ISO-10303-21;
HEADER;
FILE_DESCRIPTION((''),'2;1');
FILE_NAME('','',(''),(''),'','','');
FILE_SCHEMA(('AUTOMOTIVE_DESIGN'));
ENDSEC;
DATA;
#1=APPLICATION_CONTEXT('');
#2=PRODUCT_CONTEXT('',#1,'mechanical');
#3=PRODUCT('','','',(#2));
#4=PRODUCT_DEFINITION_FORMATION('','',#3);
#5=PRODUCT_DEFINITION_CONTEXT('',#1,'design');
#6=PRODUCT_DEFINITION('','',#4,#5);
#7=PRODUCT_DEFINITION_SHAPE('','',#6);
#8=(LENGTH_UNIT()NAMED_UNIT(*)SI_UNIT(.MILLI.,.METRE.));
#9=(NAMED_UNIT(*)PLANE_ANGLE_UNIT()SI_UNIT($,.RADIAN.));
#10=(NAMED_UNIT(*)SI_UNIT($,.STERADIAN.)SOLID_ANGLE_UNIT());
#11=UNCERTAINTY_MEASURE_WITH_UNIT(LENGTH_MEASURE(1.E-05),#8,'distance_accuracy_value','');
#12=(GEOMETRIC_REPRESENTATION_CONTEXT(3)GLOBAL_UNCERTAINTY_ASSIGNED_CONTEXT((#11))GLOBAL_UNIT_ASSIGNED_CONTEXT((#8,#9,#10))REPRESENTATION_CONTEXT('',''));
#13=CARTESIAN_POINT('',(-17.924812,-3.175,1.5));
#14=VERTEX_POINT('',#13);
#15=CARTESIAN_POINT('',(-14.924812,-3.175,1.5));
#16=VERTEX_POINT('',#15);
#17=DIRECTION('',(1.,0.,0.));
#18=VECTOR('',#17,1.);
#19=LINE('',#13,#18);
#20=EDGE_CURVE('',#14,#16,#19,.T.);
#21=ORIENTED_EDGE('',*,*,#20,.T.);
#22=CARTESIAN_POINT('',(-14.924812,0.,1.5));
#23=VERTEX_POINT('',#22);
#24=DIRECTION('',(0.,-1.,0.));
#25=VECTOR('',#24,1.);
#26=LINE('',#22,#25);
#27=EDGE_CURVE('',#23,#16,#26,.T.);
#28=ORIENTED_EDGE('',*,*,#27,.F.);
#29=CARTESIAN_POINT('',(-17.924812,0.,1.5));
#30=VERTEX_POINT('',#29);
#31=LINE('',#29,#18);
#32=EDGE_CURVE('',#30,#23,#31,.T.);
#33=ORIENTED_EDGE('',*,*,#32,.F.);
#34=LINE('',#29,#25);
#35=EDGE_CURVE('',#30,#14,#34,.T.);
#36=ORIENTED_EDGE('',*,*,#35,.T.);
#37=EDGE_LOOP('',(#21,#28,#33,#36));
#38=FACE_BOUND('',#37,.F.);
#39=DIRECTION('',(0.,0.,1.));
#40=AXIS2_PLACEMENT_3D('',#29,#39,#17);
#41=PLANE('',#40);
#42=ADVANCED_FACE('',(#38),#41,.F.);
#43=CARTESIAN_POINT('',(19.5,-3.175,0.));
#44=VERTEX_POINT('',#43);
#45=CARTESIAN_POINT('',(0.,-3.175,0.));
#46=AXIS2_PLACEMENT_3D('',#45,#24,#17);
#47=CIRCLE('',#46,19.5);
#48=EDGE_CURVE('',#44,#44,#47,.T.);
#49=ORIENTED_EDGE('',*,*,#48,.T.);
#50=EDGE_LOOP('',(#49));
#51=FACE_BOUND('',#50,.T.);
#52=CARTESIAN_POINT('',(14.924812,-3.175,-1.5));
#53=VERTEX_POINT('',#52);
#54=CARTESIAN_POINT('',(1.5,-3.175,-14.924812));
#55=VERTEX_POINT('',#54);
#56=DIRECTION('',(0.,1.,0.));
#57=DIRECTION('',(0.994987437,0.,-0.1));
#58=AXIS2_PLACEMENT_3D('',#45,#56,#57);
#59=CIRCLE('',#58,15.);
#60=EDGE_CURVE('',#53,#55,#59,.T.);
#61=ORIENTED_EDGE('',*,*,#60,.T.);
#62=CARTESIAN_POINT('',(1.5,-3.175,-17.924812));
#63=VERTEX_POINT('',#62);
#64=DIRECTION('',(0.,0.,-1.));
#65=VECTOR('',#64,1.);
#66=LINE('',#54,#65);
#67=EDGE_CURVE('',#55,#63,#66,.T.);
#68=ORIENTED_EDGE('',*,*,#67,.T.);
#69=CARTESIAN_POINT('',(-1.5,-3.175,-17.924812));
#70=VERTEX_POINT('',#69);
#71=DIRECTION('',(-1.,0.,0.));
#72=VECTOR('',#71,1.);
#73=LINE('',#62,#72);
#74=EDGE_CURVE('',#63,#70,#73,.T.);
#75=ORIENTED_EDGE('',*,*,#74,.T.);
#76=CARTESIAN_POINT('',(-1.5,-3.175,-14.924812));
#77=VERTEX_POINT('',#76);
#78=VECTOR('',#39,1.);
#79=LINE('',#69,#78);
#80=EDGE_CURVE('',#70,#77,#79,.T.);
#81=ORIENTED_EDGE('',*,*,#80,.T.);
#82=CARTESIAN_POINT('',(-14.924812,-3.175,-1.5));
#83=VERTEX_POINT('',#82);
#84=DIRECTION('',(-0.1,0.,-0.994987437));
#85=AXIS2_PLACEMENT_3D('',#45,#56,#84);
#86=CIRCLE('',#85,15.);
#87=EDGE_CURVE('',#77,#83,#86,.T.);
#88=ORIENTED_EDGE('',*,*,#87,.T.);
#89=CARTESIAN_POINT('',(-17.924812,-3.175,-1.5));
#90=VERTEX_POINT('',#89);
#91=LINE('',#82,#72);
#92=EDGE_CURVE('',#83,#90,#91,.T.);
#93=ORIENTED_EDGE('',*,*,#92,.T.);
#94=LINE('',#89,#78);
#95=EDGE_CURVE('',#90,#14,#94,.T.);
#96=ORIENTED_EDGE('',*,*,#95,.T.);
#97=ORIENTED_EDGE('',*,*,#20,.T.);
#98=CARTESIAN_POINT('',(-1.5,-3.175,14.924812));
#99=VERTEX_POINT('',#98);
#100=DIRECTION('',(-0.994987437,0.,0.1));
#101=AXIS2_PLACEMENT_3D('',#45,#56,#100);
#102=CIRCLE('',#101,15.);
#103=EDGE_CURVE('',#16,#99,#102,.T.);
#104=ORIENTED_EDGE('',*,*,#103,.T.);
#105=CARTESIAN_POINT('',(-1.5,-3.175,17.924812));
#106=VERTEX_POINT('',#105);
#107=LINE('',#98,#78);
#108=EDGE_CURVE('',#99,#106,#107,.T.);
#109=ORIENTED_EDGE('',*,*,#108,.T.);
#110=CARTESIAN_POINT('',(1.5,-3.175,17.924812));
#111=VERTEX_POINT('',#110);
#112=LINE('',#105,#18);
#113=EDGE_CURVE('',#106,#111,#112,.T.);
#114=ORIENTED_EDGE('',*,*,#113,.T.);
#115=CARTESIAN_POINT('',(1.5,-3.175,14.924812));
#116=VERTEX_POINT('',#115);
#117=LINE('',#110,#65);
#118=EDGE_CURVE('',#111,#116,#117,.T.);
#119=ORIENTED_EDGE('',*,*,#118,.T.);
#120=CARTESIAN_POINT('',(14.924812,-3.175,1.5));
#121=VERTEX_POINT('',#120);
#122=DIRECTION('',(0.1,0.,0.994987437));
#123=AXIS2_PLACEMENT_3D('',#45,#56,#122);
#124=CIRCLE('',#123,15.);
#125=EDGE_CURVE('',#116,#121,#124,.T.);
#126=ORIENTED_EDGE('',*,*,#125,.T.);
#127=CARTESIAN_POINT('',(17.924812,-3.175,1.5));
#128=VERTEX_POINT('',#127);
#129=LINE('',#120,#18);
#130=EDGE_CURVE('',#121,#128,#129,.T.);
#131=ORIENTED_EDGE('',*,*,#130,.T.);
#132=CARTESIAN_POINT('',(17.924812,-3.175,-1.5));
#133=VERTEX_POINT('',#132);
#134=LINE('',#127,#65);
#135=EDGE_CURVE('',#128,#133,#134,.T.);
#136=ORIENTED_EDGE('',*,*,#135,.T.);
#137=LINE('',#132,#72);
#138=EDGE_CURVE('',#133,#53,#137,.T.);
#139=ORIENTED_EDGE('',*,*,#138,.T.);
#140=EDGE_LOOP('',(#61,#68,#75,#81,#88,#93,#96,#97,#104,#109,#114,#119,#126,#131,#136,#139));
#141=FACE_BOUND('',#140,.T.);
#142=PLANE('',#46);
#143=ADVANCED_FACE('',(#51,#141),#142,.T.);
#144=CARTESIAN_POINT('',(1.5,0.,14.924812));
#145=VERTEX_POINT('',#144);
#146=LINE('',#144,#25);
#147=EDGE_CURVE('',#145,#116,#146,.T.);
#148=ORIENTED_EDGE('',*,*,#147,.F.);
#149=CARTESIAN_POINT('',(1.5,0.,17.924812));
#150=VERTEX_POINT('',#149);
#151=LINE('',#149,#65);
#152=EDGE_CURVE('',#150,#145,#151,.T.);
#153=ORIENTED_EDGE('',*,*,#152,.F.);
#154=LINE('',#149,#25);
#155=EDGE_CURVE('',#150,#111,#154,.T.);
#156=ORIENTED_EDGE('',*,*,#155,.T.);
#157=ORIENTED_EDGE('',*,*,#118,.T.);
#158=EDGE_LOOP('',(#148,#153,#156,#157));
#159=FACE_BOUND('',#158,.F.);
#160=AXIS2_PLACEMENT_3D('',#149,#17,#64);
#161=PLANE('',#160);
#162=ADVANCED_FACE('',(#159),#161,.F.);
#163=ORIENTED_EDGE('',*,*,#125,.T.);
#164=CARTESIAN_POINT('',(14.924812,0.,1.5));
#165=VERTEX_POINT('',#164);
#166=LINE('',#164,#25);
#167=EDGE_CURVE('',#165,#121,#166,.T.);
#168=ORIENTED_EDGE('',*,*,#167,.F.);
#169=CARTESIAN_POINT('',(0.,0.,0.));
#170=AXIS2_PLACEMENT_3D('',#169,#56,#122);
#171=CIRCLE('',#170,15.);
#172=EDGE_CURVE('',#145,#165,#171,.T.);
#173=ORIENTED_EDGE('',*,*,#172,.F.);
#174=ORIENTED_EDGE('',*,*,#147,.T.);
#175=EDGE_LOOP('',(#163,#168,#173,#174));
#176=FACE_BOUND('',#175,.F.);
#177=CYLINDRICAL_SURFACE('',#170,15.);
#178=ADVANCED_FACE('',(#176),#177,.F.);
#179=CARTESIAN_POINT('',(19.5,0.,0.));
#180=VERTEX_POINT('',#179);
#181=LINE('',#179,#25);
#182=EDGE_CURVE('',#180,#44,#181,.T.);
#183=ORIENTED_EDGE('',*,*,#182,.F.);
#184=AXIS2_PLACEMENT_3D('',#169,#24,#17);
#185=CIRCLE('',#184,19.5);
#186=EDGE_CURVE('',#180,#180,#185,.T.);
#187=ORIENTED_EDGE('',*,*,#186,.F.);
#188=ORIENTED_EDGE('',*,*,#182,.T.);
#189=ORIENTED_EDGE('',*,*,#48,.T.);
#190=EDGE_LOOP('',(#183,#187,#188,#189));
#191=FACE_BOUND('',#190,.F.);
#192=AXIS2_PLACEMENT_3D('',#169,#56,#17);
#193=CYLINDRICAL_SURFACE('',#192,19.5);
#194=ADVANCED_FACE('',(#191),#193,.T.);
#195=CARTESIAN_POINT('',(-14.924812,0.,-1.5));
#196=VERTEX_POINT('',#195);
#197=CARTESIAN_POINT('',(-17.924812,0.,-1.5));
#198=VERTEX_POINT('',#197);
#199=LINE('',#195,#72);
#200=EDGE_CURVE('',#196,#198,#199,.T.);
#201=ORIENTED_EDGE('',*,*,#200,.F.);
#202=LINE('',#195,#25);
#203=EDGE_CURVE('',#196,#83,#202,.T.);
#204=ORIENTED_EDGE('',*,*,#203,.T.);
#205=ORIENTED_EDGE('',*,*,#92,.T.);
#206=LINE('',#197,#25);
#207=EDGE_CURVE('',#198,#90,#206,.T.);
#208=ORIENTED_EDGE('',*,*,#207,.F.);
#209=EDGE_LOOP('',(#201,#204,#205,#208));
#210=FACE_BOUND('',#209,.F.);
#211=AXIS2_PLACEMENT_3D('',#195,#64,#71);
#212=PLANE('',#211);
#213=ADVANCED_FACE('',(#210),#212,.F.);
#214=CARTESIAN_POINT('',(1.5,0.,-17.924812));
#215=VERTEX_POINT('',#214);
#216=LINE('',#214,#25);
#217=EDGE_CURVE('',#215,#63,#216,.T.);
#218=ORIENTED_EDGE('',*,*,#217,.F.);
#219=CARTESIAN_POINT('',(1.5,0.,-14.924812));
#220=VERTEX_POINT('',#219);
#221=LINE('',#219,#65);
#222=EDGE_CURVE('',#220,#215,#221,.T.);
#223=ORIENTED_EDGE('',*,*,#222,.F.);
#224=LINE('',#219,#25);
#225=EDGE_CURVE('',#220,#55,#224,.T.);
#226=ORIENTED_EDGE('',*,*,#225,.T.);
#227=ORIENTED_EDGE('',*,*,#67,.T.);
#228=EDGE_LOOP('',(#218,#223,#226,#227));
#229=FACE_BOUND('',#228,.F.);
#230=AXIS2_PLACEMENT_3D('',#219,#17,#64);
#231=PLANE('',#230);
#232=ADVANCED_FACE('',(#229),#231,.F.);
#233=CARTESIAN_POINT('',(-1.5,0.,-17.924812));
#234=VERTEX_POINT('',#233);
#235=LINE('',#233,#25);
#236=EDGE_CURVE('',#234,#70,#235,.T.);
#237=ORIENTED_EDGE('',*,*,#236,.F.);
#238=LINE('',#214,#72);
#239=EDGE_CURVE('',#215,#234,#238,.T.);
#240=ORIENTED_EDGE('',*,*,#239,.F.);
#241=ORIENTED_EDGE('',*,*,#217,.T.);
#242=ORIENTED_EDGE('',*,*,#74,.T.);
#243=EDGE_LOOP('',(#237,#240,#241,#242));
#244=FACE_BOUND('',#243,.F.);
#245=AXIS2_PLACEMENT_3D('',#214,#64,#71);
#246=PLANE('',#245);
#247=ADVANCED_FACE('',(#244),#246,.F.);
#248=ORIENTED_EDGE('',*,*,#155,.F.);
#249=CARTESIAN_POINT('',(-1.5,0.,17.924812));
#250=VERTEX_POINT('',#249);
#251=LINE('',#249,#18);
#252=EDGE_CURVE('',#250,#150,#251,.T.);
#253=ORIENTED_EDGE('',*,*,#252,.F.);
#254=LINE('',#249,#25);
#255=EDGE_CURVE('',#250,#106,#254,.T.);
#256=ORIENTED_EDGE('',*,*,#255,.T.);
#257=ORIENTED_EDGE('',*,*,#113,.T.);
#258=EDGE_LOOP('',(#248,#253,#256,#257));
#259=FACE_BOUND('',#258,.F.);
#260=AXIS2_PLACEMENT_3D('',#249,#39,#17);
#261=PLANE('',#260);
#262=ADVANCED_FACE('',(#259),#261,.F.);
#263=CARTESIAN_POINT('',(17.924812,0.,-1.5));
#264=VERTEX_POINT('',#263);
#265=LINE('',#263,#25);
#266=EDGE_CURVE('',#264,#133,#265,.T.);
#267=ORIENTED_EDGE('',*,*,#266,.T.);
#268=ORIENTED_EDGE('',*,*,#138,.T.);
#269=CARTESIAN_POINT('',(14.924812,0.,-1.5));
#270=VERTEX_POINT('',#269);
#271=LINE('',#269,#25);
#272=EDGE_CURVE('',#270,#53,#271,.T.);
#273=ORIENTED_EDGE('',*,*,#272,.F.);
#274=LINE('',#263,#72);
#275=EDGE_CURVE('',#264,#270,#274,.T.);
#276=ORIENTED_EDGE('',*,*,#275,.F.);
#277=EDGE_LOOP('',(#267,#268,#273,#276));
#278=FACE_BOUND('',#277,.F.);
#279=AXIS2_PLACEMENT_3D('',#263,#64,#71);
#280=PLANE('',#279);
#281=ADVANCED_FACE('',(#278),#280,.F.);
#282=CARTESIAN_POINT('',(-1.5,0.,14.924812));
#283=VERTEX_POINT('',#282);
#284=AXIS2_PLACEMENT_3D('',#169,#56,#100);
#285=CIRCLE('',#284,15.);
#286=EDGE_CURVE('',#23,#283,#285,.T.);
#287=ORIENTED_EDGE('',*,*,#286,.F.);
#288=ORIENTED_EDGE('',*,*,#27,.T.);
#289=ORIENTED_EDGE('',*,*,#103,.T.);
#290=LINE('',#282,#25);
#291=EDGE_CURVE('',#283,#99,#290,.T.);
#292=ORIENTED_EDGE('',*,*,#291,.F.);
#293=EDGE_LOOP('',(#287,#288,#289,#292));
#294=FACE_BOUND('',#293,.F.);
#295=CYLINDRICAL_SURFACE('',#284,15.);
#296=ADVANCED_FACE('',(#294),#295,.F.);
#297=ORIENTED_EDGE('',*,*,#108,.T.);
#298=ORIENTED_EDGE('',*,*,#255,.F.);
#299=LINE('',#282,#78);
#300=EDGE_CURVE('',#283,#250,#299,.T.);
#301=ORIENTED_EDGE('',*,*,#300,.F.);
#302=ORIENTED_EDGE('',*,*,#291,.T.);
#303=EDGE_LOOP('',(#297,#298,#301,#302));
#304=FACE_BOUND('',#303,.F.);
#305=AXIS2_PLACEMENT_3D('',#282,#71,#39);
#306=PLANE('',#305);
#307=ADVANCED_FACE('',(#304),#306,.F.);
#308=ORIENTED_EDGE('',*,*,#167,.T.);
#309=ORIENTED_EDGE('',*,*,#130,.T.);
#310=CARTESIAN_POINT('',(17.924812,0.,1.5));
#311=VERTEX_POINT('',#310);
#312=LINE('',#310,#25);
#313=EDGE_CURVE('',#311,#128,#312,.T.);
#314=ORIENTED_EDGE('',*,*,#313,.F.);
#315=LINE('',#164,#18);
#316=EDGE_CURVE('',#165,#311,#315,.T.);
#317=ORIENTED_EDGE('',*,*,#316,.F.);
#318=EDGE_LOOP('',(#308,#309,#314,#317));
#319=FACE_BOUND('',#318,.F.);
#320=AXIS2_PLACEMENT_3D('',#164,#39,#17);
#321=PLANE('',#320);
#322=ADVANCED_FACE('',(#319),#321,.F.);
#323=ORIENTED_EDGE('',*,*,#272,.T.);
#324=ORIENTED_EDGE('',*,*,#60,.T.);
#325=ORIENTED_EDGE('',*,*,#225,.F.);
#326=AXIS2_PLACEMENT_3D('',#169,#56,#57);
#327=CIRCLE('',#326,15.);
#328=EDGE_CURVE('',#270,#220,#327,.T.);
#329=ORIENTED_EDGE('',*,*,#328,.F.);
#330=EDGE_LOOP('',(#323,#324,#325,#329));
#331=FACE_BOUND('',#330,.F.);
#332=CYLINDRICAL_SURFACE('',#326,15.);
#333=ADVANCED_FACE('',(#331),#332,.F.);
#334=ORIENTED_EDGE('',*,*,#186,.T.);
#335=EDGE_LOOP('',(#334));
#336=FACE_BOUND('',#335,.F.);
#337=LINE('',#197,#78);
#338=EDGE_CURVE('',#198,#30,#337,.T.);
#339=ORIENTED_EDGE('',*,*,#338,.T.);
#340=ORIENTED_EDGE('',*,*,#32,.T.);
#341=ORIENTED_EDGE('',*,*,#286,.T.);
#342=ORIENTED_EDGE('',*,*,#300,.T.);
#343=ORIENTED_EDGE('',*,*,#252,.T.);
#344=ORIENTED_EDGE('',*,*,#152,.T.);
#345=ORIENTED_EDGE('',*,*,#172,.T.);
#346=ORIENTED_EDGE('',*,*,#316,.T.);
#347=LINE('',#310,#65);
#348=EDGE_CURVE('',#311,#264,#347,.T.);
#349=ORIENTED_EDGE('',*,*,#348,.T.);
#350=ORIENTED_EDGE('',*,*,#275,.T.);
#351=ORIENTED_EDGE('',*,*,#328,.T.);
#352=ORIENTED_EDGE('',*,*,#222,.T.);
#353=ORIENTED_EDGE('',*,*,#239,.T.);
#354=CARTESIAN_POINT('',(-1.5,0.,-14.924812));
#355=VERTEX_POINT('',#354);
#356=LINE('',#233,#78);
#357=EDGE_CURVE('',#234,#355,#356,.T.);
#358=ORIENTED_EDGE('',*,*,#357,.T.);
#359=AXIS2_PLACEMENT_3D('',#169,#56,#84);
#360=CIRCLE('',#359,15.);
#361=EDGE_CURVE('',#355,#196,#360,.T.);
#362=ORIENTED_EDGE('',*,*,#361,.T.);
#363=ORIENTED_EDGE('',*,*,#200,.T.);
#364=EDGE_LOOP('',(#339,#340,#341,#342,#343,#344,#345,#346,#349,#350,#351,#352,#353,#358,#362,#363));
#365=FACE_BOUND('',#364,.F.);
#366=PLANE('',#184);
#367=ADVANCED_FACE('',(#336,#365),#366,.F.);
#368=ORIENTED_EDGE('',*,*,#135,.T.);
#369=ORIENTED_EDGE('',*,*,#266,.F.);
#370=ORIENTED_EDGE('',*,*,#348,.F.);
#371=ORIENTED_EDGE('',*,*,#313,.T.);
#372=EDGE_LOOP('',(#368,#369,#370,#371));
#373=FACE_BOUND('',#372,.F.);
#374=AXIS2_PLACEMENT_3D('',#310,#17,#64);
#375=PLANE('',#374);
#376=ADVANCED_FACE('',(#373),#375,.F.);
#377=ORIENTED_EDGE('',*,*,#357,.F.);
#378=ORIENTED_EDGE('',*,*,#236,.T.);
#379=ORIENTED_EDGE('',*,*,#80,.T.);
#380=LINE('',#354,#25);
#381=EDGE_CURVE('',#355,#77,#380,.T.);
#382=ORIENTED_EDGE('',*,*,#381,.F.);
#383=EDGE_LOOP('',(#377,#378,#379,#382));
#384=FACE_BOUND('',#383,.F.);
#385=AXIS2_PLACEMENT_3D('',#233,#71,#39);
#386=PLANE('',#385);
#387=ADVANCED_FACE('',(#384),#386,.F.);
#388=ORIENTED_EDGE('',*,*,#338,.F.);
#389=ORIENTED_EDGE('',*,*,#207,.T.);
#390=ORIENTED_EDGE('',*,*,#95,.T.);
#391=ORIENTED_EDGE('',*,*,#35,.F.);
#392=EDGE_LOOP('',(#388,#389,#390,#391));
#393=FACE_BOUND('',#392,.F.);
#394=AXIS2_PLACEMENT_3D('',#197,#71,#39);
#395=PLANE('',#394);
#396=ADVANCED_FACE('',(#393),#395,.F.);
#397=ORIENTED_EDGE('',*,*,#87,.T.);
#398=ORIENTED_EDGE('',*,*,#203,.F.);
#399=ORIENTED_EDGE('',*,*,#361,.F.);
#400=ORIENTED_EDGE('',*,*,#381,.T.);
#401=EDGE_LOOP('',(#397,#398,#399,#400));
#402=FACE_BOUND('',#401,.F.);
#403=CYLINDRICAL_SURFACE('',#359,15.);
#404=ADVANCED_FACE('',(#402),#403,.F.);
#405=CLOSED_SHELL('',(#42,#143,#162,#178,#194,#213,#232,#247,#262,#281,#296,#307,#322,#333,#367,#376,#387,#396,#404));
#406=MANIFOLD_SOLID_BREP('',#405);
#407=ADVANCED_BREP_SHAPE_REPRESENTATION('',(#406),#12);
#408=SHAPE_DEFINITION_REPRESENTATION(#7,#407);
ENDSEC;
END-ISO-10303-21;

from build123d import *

# Parameters (mm, degrees)
F0_R     = 19.5
F1_DEPTH = 3.175


# Not quite as in the source:
# - a length typed as a fraction of an inch, garbled in the dataset ("3 / 203.2 mm" for 3/8 in), is restored


with BuildPart() as f1:
    # F0 (on Front) → F1 (new body)
    with BuildSketch(Plane.XZ):
        Circle(F0_R)
        with BuildLine():
            ThreePointArc((1.5, 14.9248115566), (10.6066017178, 10.6066017178), (14.9248115566, 1.5))
            Line((14.9248115566, 1.5), (17.9248115566, 1.5))
            Line((17.9248115566, 1.5), (17.9248115566, -1.5))
            Line((17.9248115566, -1.5), (14.9248115566, -1.5))
            ThreePointArc((14.9248115566, -1.5), (10.6066017178, -10.6066017178), (1.5, -14.9248115566))
            Line((1.5, -14.9248115566), (1.5, -17.9248115566))
            Line((1.5, -17.9248115566), (-1.5, -17.9248115566))
            Line((-1.5, -17.9248115566), (-1.5, -14.9248115566))
            ThreePointArc((-1.5, -14.9248115566), (-10.6066017178, -10.6066017178), (-14.9248115566, -1.5))
            Line((-14.9248115566, -1.5), (-17.9248115566, -1.5))
            Line((-17.9248115566, -1.5), (-17.9248115566, 1.5))
            Line((-17.9248115566, 1.5), (-14.9248115566, 1.5))
            ThreePointArc((-14.9248115566, 1.5), (-10.6066017178, 10.6066017178), (-1.5, 14.9248115566))
            Line((-1.5, 14.9248115566), (-1.5, 17.9248115566))
            Line((-1.5, 17.9248115566), (1.5, 17.9248115566))
            Line((1.5, 17.9248115566), (1.5, 14.9248115566))
        make_face(mode=Mode.SUBTRACT)
    extrude(amount=F1_DEPTH)


solid = f1.part
